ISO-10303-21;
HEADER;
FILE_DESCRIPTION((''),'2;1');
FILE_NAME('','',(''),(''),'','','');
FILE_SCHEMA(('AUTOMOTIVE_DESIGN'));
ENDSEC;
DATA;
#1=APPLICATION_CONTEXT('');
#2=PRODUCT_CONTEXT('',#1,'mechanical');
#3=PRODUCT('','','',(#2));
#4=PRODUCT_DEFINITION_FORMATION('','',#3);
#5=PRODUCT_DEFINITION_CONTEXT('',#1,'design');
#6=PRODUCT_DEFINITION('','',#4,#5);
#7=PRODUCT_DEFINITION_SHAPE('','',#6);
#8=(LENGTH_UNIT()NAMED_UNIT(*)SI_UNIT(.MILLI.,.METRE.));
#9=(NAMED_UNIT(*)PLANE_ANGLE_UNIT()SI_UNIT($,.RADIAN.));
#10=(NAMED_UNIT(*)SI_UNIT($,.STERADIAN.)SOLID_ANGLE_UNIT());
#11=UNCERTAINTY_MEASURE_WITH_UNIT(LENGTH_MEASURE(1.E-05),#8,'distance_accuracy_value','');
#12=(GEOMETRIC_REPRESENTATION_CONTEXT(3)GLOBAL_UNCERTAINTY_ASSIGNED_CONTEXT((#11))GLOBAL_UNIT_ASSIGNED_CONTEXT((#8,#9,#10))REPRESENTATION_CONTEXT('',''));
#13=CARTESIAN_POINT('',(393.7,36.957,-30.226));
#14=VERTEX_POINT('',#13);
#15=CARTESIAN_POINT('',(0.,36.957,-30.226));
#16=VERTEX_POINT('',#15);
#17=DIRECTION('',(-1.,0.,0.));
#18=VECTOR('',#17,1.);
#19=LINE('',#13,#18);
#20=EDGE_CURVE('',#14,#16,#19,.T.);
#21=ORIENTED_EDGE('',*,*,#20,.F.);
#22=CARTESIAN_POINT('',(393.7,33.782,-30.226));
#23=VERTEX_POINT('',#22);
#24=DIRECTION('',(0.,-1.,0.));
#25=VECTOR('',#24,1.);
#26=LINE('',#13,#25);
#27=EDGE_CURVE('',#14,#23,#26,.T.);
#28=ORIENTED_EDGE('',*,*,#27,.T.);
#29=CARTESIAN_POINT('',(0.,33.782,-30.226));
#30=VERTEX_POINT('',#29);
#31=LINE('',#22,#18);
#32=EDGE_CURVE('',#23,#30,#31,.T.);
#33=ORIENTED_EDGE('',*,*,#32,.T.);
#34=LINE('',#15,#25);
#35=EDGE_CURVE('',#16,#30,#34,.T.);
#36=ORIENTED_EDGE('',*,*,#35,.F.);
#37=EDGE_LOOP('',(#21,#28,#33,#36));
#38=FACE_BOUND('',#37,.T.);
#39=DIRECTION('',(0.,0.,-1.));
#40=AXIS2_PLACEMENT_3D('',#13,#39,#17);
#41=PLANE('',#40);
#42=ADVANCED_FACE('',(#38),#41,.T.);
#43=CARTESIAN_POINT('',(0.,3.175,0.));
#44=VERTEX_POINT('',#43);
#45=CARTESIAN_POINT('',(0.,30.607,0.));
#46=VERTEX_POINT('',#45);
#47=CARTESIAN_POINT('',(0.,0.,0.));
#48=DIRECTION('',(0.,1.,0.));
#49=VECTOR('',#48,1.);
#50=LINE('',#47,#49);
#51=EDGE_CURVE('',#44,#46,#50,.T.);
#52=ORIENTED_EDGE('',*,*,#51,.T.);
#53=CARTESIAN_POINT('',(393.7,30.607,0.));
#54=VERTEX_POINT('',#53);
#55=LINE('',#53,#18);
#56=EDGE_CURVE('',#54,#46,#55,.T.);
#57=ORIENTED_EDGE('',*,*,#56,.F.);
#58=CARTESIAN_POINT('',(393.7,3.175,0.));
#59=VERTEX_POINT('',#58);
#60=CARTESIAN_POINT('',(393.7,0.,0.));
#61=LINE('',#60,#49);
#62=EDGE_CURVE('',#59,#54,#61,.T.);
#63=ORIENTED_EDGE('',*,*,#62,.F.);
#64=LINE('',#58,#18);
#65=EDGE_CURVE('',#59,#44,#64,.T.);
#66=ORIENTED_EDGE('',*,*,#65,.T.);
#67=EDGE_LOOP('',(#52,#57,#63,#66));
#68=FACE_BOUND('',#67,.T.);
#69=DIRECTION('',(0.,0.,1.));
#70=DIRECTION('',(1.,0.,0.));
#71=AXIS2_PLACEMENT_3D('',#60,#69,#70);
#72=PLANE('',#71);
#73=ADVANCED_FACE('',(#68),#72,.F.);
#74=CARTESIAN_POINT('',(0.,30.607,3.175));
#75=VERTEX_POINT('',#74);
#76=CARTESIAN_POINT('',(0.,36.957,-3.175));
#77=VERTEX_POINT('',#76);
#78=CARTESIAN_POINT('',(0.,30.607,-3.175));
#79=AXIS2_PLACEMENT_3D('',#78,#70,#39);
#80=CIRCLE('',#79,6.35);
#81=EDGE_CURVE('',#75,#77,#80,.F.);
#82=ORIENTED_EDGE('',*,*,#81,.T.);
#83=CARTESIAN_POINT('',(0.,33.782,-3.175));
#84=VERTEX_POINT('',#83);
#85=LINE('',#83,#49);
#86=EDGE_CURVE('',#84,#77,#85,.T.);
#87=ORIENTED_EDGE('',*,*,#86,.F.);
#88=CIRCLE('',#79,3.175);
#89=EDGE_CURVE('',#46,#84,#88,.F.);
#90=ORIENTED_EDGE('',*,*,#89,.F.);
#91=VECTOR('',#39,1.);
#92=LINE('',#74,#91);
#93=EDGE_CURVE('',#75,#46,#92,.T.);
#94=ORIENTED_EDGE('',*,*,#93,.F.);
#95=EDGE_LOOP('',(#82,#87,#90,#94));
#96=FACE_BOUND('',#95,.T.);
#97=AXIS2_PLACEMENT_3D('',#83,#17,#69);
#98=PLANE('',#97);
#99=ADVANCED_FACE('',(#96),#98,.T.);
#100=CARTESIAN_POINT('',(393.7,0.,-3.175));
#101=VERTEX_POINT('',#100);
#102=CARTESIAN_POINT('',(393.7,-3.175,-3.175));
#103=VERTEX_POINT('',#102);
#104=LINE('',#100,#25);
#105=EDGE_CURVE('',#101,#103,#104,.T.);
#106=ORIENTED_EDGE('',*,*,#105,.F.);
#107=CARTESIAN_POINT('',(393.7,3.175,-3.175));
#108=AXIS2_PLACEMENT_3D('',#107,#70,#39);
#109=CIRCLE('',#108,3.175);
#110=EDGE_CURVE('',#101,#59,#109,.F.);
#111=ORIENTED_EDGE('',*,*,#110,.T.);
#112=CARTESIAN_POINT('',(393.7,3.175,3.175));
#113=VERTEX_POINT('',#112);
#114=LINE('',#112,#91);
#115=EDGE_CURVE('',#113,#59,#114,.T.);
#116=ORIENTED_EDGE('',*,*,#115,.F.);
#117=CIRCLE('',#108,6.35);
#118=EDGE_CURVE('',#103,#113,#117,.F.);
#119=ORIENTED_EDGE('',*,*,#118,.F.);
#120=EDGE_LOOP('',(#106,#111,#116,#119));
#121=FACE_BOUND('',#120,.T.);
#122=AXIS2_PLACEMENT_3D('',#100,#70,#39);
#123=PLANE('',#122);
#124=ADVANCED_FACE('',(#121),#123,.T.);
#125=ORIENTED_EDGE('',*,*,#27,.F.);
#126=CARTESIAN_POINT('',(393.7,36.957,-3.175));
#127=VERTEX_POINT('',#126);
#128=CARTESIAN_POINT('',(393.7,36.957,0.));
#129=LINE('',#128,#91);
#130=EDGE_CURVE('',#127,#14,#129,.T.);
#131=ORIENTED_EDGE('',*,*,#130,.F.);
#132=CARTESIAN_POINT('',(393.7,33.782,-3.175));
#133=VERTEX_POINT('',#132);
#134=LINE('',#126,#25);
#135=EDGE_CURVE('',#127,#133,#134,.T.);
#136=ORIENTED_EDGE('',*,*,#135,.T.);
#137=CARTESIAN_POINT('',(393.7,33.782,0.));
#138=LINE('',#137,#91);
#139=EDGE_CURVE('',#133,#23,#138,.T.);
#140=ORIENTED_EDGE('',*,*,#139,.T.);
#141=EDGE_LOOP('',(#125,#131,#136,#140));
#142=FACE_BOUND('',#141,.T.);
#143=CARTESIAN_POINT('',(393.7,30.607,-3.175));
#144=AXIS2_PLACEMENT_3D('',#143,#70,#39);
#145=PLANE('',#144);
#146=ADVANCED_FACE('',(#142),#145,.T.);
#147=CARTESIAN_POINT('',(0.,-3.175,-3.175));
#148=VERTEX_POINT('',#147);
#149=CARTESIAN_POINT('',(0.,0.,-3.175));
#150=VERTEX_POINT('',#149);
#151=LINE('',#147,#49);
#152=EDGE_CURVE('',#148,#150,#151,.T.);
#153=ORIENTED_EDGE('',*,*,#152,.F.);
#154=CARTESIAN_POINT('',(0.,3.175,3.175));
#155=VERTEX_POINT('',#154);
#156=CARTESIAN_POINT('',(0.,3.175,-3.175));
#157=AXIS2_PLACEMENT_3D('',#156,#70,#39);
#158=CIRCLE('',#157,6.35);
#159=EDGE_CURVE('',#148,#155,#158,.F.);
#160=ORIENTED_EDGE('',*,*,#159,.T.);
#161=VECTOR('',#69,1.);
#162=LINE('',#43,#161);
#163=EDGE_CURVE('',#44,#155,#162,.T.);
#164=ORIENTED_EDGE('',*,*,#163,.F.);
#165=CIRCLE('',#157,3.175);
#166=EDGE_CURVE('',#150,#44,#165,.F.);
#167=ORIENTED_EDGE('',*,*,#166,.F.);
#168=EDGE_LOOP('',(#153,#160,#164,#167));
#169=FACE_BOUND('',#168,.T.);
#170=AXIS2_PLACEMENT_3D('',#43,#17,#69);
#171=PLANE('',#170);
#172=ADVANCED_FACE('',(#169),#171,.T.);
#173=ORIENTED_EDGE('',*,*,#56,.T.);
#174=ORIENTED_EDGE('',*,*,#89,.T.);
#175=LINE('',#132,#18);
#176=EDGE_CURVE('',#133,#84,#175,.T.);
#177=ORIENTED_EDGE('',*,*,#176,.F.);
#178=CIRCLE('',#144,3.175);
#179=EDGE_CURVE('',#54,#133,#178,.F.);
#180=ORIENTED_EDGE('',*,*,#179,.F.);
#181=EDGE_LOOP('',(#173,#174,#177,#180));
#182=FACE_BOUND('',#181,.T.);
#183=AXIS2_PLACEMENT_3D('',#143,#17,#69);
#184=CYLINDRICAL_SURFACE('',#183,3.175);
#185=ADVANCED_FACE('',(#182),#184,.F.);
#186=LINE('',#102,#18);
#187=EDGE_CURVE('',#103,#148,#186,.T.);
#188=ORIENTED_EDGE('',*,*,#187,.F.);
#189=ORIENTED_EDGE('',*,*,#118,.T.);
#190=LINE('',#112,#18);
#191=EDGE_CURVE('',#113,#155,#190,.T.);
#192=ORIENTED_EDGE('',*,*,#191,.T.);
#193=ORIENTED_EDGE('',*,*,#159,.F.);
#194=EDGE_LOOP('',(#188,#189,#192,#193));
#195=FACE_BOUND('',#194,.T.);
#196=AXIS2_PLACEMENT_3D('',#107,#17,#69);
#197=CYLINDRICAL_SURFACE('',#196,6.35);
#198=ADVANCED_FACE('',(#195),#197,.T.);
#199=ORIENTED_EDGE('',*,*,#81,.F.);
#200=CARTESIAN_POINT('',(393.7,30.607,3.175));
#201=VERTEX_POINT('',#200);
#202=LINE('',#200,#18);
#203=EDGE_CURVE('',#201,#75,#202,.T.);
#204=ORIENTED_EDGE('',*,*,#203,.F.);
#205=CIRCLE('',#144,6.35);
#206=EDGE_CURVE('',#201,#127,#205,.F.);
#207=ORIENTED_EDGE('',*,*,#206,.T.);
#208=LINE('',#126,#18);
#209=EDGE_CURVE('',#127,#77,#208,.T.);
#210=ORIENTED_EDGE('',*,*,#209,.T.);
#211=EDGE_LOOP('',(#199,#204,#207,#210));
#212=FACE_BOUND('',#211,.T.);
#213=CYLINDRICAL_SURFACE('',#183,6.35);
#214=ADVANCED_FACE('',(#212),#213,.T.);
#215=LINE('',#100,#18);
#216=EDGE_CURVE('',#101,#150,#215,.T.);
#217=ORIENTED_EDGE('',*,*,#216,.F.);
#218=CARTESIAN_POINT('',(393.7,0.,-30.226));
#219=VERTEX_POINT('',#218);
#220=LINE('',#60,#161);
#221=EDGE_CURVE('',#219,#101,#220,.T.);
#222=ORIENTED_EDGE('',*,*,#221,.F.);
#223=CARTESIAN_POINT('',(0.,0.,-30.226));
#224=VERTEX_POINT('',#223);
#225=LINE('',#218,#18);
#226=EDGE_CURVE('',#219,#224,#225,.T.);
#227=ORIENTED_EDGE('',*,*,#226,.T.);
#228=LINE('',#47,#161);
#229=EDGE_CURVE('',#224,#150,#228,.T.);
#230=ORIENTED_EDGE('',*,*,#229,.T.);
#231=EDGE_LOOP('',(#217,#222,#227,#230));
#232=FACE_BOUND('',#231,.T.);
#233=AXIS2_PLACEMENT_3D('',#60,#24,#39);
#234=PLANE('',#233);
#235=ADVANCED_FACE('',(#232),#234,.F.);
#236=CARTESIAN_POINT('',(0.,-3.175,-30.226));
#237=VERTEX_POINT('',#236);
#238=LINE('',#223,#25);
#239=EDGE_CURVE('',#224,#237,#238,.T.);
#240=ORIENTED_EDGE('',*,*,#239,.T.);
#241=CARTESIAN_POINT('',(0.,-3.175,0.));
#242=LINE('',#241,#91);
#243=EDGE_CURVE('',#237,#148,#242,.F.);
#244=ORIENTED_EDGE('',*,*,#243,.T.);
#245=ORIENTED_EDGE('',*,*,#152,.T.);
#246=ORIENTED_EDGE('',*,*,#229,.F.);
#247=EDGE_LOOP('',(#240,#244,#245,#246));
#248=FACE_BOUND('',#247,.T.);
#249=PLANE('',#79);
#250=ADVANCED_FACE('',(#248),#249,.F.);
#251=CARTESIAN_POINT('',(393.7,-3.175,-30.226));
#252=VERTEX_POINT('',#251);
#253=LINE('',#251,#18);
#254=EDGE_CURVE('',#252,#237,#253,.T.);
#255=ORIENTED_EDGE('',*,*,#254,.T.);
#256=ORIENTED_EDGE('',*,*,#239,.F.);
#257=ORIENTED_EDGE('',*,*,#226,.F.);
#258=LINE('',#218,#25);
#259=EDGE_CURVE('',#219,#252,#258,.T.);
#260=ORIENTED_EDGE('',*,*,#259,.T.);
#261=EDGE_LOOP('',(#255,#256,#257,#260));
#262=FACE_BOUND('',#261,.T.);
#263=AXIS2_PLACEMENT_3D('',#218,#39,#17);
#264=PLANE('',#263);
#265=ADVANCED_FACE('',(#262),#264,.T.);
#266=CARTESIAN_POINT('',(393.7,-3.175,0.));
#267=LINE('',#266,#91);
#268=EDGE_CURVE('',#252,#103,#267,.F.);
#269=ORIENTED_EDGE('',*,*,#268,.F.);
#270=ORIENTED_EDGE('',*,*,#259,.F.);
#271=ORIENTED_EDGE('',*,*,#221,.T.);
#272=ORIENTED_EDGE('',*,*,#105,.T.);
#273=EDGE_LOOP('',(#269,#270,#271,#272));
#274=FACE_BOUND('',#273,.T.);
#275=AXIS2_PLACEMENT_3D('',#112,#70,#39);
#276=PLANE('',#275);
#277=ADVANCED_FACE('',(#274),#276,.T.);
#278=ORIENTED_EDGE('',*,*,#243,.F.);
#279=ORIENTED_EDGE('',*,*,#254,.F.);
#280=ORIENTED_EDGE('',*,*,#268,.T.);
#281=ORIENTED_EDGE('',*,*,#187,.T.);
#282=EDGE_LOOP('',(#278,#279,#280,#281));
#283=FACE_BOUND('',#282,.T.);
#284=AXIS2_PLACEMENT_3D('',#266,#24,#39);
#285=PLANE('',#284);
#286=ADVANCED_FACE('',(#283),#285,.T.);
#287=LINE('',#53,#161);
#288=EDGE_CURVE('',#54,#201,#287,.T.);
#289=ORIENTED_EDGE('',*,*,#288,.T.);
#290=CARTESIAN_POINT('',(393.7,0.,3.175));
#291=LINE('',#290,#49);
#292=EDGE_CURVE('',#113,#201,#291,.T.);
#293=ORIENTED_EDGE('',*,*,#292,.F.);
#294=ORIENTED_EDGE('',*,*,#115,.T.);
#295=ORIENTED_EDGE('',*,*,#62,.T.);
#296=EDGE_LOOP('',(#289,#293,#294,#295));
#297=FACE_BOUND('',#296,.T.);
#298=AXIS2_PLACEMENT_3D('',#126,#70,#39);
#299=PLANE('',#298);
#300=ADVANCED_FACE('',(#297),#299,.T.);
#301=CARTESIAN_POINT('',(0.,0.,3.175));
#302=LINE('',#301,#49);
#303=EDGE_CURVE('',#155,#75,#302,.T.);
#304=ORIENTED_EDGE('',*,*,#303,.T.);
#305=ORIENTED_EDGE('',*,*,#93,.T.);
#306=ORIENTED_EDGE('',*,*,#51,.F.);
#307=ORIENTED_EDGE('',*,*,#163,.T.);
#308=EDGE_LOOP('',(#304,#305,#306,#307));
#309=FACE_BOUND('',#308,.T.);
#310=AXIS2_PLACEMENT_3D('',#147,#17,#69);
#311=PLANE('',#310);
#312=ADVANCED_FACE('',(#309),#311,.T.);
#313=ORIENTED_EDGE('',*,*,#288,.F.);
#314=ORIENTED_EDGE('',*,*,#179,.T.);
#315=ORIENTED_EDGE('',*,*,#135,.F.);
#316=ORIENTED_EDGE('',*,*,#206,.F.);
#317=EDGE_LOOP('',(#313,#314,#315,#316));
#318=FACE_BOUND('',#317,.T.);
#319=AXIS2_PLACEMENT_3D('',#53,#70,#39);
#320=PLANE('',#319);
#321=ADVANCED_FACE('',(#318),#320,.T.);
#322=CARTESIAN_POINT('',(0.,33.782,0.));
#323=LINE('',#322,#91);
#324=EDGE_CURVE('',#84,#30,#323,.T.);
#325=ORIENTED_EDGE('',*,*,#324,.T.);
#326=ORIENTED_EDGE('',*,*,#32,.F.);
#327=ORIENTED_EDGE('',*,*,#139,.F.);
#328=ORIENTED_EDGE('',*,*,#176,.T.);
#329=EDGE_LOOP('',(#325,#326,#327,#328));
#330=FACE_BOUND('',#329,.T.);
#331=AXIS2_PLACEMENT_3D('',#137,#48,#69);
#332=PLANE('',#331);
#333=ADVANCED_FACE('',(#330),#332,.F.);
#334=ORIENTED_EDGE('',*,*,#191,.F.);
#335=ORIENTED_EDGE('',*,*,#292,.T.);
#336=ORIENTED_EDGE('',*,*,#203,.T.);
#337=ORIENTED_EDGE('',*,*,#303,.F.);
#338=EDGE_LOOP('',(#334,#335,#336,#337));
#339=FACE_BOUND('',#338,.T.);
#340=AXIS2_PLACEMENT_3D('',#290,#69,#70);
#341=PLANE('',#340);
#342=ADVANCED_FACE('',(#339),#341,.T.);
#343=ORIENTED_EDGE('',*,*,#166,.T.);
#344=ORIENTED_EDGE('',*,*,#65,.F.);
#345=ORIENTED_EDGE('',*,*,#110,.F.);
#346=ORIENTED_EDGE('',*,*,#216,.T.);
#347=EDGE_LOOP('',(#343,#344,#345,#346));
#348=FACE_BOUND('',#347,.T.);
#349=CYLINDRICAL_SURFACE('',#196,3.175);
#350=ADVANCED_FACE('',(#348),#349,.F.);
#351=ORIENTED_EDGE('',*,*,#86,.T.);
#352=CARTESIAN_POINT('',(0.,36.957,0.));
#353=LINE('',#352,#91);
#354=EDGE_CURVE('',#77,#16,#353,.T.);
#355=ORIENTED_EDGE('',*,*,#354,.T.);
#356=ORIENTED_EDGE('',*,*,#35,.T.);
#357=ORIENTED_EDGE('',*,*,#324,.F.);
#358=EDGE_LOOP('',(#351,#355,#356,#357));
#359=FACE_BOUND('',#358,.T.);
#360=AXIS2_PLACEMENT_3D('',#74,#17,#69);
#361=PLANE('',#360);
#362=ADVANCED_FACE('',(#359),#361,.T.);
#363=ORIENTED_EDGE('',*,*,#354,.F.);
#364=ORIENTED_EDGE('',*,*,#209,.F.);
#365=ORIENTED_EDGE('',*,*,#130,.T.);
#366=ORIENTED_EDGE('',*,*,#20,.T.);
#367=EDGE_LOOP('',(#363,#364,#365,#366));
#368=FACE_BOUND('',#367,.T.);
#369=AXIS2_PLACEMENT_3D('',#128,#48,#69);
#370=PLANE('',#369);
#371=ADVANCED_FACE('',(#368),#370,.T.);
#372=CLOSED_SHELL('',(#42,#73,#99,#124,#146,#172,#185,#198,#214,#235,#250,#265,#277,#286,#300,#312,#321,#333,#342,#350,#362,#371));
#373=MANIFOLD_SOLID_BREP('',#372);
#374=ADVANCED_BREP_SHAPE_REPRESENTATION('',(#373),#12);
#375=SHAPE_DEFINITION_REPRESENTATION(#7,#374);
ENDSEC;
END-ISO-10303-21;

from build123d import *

# Parameters (mm, degrees)
BASE_FLANGE1_DEPTH = 393.7


# Sheet-metal steps are written as plain solids
with BuildPart() as part:
    # Sketch1 → Base-Flange1 (new body)
    with BuildSketch(Plane(origin=(0, 0, 0), x_dir=(0, 0, -1), z_dir=(1, 0, 0))):
        with BuildLine():
            Line((30.226, 33.782), (3.175, 33.782))
            ThreePointArc((3.175, 33.782), (0.92993597, 32.85206403), (0, 30.607))
            Line((0, 30.607), (0, 3.175))
            ThreePointArc((0, 3.175), (0.92993597, 0.92993597), (3.175, 0))
            Line((3.175, 0), (30.226, 0))
            Line((30.226, 0), (30.226, -3.175))
            Line((30.226, -3.175), (3.175, -3.175))
            ThreePointArc((3.175, -3.175), (-1.315128061, -1.315128061), (-3.175, 3.175))
            Line((-3.175, 3.175), (-3.175, 30.607))
            ThreePointArc((-3.175, 30.607), (-1.315128061, 35.097128061), (3.175, 36.957))
            Line((3.175, 36.957), (30.226, 36.957))
            Line((30.226, 36.957), (30.226, 33.782))
        make_face()
    extrude(amount=BASE_FLANGE1_DEPTH)


solid = part.part
